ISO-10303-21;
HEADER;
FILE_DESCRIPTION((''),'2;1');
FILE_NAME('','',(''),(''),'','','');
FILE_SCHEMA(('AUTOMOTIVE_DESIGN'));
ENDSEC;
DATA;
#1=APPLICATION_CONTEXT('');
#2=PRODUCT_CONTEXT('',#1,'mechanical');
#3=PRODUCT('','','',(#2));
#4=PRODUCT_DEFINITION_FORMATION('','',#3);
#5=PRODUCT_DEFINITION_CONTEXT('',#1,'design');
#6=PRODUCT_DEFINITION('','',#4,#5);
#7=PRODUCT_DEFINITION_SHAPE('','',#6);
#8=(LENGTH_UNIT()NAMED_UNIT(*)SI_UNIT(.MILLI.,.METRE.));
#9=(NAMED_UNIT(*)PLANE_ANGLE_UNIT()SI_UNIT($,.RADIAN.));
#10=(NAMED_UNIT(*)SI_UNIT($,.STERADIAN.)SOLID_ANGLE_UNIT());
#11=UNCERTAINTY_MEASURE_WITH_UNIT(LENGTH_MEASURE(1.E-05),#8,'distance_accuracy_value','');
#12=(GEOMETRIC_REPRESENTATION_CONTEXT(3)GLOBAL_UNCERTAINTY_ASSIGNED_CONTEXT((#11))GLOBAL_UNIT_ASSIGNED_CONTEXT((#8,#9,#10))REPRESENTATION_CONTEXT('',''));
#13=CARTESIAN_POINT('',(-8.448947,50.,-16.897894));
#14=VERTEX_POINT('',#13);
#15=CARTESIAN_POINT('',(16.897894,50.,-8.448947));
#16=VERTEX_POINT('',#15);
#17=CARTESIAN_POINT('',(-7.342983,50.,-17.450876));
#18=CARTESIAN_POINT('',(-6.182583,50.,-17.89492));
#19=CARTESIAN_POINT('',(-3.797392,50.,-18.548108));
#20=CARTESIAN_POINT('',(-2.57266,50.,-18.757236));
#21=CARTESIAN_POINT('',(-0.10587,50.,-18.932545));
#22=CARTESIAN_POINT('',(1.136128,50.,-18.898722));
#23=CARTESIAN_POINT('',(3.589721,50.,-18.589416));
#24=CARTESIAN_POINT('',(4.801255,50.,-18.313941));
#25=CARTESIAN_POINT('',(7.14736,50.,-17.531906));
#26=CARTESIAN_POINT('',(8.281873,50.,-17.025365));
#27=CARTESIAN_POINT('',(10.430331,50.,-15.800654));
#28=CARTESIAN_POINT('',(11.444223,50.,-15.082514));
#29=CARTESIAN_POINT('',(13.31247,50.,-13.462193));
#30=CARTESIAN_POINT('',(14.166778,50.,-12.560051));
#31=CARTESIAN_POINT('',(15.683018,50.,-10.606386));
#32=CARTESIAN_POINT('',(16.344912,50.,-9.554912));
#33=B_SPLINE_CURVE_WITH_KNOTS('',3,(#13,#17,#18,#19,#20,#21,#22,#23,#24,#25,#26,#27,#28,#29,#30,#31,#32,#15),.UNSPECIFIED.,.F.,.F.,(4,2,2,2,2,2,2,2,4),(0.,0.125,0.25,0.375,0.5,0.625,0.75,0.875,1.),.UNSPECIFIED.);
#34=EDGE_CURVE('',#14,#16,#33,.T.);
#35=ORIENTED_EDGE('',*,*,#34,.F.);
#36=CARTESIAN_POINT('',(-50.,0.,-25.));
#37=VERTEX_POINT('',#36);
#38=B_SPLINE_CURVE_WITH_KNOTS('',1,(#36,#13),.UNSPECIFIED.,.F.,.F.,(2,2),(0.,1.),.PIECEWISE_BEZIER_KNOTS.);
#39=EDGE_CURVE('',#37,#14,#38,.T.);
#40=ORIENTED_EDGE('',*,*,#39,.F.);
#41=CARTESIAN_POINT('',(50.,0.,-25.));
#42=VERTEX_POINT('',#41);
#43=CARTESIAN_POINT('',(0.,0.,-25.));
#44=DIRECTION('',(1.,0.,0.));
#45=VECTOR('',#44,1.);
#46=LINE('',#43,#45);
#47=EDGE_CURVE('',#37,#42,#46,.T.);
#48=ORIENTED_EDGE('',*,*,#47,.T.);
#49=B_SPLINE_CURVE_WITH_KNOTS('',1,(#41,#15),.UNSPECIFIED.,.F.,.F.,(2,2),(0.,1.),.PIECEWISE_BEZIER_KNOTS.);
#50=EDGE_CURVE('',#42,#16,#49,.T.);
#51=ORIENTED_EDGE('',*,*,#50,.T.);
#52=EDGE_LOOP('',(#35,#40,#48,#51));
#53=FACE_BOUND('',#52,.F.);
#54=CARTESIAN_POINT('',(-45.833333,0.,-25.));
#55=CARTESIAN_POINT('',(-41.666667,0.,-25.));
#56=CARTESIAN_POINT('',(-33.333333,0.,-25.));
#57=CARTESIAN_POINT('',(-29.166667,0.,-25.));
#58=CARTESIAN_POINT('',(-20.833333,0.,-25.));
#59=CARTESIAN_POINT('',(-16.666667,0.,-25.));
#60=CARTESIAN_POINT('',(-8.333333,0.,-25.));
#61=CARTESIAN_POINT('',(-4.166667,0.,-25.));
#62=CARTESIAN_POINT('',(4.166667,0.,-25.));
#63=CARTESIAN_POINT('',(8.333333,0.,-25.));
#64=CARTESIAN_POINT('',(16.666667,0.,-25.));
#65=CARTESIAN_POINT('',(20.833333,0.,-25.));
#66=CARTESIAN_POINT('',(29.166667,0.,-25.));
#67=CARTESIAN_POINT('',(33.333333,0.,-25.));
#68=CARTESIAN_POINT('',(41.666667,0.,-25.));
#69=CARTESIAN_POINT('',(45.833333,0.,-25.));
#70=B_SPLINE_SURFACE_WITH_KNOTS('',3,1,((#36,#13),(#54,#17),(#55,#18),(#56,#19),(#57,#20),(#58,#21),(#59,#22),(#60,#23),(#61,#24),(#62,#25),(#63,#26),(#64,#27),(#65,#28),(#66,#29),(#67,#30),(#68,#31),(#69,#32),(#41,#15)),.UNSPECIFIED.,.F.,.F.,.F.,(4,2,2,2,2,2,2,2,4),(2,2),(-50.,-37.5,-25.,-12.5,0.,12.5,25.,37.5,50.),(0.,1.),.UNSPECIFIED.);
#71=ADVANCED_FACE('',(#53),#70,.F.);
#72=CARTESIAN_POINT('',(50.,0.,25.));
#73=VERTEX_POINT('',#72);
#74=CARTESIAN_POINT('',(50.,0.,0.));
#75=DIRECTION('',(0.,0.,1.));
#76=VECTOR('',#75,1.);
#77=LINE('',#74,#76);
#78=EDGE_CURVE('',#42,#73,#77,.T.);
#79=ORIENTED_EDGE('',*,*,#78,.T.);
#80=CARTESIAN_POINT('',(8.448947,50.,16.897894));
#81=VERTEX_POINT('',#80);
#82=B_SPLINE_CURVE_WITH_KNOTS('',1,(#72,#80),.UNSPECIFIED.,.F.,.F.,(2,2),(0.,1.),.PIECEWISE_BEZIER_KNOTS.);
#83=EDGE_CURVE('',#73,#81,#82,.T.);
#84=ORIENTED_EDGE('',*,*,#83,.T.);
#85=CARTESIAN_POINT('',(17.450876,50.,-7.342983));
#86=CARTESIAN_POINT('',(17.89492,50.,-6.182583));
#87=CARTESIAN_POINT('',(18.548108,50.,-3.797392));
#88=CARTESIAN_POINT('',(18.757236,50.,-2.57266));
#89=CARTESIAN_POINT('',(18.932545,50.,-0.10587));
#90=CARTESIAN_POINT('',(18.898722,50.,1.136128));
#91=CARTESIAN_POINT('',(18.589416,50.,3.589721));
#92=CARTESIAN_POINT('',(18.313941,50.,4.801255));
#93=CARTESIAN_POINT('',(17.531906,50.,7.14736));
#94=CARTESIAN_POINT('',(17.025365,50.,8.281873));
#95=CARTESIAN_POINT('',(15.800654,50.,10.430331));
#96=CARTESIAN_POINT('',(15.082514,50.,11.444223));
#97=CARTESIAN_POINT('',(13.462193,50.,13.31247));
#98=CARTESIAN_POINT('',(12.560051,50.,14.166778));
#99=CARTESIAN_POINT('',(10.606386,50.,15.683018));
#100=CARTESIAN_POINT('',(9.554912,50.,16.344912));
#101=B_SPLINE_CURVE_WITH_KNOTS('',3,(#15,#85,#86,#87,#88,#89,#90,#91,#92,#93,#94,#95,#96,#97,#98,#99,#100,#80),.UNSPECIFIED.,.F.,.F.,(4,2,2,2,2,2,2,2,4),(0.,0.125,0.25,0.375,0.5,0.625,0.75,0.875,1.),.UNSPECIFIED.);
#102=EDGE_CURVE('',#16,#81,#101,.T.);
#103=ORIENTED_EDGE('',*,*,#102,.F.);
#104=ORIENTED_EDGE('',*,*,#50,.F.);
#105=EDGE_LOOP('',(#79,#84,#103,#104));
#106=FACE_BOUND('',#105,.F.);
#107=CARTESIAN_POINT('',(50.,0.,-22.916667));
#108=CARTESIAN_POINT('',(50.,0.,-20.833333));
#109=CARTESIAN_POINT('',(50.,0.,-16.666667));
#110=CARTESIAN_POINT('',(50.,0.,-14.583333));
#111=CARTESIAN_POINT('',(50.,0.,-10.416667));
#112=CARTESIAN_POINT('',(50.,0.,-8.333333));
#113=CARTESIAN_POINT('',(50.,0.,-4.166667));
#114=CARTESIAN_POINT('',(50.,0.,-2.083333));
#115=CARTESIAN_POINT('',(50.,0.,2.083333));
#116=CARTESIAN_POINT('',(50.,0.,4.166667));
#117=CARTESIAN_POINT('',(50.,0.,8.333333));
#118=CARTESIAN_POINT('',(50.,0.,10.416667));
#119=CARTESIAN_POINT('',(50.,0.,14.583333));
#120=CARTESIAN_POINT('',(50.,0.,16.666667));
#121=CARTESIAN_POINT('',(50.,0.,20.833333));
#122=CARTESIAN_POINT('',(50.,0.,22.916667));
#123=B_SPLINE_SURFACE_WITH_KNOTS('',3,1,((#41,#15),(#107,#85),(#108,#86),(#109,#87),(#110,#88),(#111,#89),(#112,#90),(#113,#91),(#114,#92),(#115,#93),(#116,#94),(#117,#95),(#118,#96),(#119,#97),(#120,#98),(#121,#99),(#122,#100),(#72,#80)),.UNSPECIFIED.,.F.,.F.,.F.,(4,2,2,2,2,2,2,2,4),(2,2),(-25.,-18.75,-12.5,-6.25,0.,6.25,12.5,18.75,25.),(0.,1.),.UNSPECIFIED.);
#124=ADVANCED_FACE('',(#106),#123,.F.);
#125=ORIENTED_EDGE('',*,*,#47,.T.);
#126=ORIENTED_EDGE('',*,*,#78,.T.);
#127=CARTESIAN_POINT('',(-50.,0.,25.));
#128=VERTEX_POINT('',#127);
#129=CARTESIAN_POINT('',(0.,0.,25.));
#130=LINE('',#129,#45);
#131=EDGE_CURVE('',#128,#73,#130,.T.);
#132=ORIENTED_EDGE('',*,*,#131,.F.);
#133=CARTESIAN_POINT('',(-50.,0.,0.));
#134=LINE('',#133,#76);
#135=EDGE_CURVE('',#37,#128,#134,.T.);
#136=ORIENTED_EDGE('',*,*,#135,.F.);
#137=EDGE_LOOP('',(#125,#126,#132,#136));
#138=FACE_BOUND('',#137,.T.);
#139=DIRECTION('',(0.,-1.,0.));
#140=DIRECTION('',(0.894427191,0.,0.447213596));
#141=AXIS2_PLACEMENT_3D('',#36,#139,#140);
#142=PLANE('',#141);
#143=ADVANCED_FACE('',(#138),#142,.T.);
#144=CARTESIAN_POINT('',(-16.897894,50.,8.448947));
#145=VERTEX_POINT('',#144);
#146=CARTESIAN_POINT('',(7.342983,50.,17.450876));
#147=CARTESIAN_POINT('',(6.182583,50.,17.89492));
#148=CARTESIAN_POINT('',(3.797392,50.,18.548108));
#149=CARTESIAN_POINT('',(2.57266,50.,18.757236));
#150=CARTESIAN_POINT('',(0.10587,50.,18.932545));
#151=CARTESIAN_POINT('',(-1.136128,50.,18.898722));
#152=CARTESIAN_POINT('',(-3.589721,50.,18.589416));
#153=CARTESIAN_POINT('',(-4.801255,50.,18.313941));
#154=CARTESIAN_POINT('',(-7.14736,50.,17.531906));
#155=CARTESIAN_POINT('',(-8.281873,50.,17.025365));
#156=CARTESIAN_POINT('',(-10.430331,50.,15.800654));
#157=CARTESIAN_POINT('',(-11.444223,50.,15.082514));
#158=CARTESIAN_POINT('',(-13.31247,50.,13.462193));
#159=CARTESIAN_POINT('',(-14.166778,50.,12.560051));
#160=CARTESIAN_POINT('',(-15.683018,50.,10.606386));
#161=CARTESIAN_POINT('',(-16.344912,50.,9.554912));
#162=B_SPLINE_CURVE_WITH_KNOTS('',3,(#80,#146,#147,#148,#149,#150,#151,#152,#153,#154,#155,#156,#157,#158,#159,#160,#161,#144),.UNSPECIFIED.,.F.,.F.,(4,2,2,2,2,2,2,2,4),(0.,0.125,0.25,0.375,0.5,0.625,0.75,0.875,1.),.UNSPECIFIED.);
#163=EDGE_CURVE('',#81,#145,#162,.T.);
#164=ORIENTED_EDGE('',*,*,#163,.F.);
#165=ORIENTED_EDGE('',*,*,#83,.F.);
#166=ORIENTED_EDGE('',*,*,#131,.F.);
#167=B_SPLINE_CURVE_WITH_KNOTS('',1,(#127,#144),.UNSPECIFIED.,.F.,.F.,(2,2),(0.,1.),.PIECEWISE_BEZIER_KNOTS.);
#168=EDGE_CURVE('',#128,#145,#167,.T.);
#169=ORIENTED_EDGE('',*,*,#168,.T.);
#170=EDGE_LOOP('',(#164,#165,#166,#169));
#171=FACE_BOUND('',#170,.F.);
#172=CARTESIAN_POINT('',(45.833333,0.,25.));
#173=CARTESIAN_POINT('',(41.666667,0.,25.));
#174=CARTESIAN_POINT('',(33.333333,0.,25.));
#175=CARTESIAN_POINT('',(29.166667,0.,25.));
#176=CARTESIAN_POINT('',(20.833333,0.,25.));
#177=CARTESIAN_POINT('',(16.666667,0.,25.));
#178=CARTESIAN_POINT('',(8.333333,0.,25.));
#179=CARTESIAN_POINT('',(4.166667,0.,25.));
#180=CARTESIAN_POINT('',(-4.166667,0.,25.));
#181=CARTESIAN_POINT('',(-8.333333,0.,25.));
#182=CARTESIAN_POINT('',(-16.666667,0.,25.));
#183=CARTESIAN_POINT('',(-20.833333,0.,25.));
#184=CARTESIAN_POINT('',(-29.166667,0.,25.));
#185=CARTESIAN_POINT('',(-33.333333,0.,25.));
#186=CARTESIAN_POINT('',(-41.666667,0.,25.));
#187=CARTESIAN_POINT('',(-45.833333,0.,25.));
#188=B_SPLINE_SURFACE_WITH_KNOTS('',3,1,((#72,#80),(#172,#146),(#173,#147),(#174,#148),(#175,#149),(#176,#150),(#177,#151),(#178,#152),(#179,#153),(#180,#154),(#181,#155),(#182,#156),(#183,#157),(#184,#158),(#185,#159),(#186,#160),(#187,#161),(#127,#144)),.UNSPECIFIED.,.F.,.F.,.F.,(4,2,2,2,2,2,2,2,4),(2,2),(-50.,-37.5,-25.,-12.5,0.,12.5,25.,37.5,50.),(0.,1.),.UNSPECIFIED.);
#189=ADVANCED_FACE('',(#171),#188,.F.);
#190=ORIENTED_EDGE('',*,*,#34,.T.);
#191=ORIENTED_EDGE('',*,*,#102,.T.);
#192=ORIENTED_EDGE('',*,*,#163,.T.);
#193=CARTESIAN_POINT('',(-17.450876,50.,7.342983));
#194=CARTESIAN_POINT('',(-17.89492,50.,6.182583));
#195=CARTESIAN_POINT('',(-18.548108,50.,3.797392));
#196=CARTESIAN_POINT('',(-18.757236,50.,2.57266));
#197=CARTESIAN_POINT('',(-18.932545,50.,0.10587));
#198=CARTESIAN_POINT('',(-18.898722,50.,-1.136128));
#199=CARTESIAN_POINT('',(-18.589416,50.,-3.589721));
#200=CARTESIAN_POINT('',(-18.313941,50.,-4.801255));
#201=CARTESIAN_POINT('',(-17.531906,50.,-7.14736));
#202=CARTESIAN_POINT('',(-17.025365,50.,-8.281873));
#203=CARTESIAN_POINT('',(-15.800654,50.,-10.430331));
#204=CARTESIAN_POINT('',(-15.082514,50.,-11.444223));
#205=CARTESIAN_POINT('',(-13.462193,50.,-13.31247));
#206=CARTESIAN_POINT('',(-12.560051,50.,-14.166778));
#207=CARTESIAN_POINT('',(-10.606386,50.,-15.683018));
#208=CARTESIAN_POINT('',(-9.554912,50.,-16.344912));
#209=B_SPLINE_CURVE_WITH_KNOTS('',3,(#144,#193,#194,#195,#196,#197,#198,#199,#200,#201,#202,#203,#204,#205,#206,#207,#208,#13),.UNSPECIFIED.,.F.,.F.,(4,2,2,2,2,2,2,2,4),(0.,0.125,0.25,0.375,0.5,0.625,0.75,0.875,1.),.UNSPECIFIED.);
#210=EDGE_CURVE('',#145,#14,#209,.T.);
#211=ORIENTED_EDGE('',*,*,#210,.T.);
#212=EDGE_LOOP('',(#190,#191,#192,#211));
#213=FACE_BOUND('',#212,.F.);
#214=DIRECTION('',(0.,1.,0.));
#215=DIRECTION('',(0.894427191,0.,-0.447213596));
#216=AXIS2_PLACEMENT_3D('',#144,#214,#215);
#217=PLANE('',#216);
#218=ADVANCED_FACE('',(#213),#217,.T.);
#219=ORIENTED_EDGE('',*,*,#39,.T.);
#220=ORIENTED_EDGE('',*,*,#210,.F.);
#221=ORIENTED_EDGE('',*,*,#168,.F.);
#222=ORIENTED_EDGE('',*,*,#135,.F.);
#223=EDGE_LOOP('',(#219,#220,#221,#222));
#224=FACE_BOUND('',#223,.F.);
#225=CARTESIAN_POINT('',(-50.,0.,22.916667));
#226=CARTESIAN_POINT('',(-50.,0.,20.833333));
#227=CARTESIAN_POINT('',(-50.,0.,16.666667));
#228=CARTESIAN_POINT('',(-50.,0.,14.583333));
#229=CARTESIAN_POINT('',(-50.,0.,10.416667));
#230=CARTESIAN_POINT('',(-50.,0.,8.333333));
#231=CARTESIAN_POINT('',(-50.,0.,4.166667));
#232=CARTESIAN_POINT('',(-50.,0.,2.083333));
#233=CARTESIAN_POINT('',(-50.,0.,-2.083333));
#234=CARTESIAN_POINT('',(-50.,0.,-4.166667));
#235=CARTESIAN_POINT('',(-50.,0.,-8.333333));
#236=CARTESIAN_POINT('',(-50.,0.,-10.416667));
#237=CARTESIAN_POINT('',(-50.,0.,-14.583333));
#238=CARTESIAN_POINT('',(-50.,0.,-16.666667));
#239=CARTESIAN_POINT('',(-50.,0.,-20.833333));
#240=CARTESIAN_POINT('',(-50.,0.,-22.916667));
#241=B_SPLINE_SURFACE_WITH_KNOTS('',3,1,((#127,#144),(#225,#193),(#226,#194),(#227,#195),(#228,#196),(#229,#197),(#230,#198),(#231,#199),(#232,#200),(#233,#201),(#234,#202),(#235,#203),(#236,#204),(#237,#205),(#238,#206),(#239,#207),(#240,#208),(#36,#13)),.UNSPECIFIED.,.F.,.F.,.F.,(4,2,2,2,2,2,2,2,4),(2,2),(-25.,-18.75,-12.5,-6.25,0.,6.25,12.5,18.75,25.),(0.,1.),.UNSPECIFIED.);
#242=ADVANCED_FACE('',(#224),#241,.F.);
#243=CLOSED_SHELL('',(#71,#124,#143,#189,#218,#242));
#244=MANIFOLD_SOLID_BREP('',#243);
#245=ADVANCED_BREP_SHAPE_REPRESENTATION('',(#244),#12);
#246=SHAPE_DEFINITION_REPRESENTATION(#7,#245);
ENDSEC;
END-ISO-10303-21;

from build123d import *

# Parameters (mm, degrees)
F0_W = 100
F0_H = 50


# Not quite as in the source:
# - the arcs of a loft's sections are written as splines that run evenly, so that the points pair up as in the source's solid


with BuildPart() as f3:
    # F0 (on Front) → F3 section 0
    with BuildSketch(Plane.XZ):
        Rectangle(F0_W, F0_H)
    # F2 (on offset) → F3 section 1
    with BuildSketch(Plane.XZ.offset(-50)):
        with BuildLine():
            add(Edge.make_bspline(
                [(-16.8978941877, 8.4489470939), (-17.4508764819, 7.3429825055), (-17.8949197916, 6.1825826088), (-18.5481076052, 3.7973920433), (-18.7572359577, 2.572660353), (-18.932545355, 0.1058699345), (-18.898722065, -1.1361277974), (-18.5894160044, -3.5897206965), (-18.313940882, -4.8012551937), (-17.5319058218, -7.1473603742), (-17.0253652214, -8.2818730455), (-15.8006543305, -10.4303310011), (-15.0825143233, -11.4442231607), (-13.4621925543, -13.312469857), (-12.5600508581, -14.1667781978), (-10.606386268, -15.6830179621), (-9.5549116822, -16.3449118936), (-8.4489470939, -16.8978941877)],
                knots=[0, 0, 0, 0, 0.125, 0.125, 0.25, 0.25, 0.375, 0.375, 0.5, 0.5, 0.625, 0.625, 0.75, 0.75, 0.875, 0.875, 1, 1, 1, 1], degree=3))
            add(Edge.make_bspline(
                [(-8.4489470939, -16.8978941877), (-7.3429825055, -17.4508764819), (-6.1825826088, -17.8949197916), (-3.7973920433, -18.5481076052), (-2.572660353, -18.7572359577), (-0.1058699345, -18.932545355), (1.1361277974, -18.898722065), (3.5897206965, -18.5894160044), (4.8012551937, -18.313940882), (7.1473603742, -17.5319058218), (8.2818730455, -17.0253652214), (10.4303310011, -15.8006543305), (11.4442231607, -15.0825143233), (13.312469857, -13.4621925543), (14.1667781978, -12.5600508581), (15.6830179621, -10.606386268), (16.3449118936, -9.5549116822), (16.8978941877, -8.4489470939)],
                knots=[0, 0, 0, 0, 0.125, 0.125, 0.25, 0.25, 0.375, 0.375, 0.5, 0.5, 0.625, 0.625, 0.75, 0.75, 0.875, 0.875, 1, 1, 1, 1], degree=3))
            add(Edge.make_bspline(
                [(16.8978941877, -8.4489470939), (17.4508764819, -7.3429825055), (17.8949197916, -6.1825826088), (18.5481076052, -3.7973920433), (18.7572359577, -2.572660353), (18.932545355, -0.1058699345), (18.898722065, 1.1361277974), (18.5894160044, 3.5897206965), (18.313940882, 4.8012551937), (17.5319058218, 7.1473603742), (17.0253652214, 8.2818730455), (15.8006543305, 10.4303310011), (15.0825143233, 11.4442231607), (13.4621925543, 13.312469857), (12.5600508581, 14.1667781978), (10.606386268, 15.6830179621), (9.5549116822, 16.3449118936), (8.4489470939, 16.8978941877)],
                knots=[0, 0, 0, 0, 0.125, 0.125, 0.25, 0.25, 0.375, 0.375, 0.5, 0.5, 0.625, 0.625, 0.75, 0.75, 0.875, 0.875, 1, 1, 1, 1], degree=3))
            add(Edge.make_bspline(
                [(8.4489470939, 16.8978941877), (7.3429825055, 17.4508764819), (6.1825826088, 17.8949197916), (3.7973920433, 18.5481076052), (2.572660353, 18.7572359577), (0.1058699345, 18.932545355), (-1.1361277974, 18.898722065), (-3.5897206965, 18.5894160044), (-4.8012551937, 18.313940882), (-7.1473603742, 17.5319058218), (-8.2818730455, 17.0253652214), (-10.4303310011, 15.8006543305), (-11.4442231607, 15.0825143233), (-13.312469857, 13.4621925543), (-14.1667781978, 12.5600508581), (-15.6830179621, 10.606386268), (-16.3449118936, 9.5549116822), (-16.8978941877, 8.4489470939)],
                knots=[0, 0, 0, 0, 0.125, 0.125, 0.25, 0.25, 0.375, 0.375, 0.5, 0.5, 0.625, 0.625, 0.75, 0.75, 0.875, 0.875, 1, 1, 1, 1], degree=3))
        make_face()
    loft(ruled=True)


solid = f3.part
